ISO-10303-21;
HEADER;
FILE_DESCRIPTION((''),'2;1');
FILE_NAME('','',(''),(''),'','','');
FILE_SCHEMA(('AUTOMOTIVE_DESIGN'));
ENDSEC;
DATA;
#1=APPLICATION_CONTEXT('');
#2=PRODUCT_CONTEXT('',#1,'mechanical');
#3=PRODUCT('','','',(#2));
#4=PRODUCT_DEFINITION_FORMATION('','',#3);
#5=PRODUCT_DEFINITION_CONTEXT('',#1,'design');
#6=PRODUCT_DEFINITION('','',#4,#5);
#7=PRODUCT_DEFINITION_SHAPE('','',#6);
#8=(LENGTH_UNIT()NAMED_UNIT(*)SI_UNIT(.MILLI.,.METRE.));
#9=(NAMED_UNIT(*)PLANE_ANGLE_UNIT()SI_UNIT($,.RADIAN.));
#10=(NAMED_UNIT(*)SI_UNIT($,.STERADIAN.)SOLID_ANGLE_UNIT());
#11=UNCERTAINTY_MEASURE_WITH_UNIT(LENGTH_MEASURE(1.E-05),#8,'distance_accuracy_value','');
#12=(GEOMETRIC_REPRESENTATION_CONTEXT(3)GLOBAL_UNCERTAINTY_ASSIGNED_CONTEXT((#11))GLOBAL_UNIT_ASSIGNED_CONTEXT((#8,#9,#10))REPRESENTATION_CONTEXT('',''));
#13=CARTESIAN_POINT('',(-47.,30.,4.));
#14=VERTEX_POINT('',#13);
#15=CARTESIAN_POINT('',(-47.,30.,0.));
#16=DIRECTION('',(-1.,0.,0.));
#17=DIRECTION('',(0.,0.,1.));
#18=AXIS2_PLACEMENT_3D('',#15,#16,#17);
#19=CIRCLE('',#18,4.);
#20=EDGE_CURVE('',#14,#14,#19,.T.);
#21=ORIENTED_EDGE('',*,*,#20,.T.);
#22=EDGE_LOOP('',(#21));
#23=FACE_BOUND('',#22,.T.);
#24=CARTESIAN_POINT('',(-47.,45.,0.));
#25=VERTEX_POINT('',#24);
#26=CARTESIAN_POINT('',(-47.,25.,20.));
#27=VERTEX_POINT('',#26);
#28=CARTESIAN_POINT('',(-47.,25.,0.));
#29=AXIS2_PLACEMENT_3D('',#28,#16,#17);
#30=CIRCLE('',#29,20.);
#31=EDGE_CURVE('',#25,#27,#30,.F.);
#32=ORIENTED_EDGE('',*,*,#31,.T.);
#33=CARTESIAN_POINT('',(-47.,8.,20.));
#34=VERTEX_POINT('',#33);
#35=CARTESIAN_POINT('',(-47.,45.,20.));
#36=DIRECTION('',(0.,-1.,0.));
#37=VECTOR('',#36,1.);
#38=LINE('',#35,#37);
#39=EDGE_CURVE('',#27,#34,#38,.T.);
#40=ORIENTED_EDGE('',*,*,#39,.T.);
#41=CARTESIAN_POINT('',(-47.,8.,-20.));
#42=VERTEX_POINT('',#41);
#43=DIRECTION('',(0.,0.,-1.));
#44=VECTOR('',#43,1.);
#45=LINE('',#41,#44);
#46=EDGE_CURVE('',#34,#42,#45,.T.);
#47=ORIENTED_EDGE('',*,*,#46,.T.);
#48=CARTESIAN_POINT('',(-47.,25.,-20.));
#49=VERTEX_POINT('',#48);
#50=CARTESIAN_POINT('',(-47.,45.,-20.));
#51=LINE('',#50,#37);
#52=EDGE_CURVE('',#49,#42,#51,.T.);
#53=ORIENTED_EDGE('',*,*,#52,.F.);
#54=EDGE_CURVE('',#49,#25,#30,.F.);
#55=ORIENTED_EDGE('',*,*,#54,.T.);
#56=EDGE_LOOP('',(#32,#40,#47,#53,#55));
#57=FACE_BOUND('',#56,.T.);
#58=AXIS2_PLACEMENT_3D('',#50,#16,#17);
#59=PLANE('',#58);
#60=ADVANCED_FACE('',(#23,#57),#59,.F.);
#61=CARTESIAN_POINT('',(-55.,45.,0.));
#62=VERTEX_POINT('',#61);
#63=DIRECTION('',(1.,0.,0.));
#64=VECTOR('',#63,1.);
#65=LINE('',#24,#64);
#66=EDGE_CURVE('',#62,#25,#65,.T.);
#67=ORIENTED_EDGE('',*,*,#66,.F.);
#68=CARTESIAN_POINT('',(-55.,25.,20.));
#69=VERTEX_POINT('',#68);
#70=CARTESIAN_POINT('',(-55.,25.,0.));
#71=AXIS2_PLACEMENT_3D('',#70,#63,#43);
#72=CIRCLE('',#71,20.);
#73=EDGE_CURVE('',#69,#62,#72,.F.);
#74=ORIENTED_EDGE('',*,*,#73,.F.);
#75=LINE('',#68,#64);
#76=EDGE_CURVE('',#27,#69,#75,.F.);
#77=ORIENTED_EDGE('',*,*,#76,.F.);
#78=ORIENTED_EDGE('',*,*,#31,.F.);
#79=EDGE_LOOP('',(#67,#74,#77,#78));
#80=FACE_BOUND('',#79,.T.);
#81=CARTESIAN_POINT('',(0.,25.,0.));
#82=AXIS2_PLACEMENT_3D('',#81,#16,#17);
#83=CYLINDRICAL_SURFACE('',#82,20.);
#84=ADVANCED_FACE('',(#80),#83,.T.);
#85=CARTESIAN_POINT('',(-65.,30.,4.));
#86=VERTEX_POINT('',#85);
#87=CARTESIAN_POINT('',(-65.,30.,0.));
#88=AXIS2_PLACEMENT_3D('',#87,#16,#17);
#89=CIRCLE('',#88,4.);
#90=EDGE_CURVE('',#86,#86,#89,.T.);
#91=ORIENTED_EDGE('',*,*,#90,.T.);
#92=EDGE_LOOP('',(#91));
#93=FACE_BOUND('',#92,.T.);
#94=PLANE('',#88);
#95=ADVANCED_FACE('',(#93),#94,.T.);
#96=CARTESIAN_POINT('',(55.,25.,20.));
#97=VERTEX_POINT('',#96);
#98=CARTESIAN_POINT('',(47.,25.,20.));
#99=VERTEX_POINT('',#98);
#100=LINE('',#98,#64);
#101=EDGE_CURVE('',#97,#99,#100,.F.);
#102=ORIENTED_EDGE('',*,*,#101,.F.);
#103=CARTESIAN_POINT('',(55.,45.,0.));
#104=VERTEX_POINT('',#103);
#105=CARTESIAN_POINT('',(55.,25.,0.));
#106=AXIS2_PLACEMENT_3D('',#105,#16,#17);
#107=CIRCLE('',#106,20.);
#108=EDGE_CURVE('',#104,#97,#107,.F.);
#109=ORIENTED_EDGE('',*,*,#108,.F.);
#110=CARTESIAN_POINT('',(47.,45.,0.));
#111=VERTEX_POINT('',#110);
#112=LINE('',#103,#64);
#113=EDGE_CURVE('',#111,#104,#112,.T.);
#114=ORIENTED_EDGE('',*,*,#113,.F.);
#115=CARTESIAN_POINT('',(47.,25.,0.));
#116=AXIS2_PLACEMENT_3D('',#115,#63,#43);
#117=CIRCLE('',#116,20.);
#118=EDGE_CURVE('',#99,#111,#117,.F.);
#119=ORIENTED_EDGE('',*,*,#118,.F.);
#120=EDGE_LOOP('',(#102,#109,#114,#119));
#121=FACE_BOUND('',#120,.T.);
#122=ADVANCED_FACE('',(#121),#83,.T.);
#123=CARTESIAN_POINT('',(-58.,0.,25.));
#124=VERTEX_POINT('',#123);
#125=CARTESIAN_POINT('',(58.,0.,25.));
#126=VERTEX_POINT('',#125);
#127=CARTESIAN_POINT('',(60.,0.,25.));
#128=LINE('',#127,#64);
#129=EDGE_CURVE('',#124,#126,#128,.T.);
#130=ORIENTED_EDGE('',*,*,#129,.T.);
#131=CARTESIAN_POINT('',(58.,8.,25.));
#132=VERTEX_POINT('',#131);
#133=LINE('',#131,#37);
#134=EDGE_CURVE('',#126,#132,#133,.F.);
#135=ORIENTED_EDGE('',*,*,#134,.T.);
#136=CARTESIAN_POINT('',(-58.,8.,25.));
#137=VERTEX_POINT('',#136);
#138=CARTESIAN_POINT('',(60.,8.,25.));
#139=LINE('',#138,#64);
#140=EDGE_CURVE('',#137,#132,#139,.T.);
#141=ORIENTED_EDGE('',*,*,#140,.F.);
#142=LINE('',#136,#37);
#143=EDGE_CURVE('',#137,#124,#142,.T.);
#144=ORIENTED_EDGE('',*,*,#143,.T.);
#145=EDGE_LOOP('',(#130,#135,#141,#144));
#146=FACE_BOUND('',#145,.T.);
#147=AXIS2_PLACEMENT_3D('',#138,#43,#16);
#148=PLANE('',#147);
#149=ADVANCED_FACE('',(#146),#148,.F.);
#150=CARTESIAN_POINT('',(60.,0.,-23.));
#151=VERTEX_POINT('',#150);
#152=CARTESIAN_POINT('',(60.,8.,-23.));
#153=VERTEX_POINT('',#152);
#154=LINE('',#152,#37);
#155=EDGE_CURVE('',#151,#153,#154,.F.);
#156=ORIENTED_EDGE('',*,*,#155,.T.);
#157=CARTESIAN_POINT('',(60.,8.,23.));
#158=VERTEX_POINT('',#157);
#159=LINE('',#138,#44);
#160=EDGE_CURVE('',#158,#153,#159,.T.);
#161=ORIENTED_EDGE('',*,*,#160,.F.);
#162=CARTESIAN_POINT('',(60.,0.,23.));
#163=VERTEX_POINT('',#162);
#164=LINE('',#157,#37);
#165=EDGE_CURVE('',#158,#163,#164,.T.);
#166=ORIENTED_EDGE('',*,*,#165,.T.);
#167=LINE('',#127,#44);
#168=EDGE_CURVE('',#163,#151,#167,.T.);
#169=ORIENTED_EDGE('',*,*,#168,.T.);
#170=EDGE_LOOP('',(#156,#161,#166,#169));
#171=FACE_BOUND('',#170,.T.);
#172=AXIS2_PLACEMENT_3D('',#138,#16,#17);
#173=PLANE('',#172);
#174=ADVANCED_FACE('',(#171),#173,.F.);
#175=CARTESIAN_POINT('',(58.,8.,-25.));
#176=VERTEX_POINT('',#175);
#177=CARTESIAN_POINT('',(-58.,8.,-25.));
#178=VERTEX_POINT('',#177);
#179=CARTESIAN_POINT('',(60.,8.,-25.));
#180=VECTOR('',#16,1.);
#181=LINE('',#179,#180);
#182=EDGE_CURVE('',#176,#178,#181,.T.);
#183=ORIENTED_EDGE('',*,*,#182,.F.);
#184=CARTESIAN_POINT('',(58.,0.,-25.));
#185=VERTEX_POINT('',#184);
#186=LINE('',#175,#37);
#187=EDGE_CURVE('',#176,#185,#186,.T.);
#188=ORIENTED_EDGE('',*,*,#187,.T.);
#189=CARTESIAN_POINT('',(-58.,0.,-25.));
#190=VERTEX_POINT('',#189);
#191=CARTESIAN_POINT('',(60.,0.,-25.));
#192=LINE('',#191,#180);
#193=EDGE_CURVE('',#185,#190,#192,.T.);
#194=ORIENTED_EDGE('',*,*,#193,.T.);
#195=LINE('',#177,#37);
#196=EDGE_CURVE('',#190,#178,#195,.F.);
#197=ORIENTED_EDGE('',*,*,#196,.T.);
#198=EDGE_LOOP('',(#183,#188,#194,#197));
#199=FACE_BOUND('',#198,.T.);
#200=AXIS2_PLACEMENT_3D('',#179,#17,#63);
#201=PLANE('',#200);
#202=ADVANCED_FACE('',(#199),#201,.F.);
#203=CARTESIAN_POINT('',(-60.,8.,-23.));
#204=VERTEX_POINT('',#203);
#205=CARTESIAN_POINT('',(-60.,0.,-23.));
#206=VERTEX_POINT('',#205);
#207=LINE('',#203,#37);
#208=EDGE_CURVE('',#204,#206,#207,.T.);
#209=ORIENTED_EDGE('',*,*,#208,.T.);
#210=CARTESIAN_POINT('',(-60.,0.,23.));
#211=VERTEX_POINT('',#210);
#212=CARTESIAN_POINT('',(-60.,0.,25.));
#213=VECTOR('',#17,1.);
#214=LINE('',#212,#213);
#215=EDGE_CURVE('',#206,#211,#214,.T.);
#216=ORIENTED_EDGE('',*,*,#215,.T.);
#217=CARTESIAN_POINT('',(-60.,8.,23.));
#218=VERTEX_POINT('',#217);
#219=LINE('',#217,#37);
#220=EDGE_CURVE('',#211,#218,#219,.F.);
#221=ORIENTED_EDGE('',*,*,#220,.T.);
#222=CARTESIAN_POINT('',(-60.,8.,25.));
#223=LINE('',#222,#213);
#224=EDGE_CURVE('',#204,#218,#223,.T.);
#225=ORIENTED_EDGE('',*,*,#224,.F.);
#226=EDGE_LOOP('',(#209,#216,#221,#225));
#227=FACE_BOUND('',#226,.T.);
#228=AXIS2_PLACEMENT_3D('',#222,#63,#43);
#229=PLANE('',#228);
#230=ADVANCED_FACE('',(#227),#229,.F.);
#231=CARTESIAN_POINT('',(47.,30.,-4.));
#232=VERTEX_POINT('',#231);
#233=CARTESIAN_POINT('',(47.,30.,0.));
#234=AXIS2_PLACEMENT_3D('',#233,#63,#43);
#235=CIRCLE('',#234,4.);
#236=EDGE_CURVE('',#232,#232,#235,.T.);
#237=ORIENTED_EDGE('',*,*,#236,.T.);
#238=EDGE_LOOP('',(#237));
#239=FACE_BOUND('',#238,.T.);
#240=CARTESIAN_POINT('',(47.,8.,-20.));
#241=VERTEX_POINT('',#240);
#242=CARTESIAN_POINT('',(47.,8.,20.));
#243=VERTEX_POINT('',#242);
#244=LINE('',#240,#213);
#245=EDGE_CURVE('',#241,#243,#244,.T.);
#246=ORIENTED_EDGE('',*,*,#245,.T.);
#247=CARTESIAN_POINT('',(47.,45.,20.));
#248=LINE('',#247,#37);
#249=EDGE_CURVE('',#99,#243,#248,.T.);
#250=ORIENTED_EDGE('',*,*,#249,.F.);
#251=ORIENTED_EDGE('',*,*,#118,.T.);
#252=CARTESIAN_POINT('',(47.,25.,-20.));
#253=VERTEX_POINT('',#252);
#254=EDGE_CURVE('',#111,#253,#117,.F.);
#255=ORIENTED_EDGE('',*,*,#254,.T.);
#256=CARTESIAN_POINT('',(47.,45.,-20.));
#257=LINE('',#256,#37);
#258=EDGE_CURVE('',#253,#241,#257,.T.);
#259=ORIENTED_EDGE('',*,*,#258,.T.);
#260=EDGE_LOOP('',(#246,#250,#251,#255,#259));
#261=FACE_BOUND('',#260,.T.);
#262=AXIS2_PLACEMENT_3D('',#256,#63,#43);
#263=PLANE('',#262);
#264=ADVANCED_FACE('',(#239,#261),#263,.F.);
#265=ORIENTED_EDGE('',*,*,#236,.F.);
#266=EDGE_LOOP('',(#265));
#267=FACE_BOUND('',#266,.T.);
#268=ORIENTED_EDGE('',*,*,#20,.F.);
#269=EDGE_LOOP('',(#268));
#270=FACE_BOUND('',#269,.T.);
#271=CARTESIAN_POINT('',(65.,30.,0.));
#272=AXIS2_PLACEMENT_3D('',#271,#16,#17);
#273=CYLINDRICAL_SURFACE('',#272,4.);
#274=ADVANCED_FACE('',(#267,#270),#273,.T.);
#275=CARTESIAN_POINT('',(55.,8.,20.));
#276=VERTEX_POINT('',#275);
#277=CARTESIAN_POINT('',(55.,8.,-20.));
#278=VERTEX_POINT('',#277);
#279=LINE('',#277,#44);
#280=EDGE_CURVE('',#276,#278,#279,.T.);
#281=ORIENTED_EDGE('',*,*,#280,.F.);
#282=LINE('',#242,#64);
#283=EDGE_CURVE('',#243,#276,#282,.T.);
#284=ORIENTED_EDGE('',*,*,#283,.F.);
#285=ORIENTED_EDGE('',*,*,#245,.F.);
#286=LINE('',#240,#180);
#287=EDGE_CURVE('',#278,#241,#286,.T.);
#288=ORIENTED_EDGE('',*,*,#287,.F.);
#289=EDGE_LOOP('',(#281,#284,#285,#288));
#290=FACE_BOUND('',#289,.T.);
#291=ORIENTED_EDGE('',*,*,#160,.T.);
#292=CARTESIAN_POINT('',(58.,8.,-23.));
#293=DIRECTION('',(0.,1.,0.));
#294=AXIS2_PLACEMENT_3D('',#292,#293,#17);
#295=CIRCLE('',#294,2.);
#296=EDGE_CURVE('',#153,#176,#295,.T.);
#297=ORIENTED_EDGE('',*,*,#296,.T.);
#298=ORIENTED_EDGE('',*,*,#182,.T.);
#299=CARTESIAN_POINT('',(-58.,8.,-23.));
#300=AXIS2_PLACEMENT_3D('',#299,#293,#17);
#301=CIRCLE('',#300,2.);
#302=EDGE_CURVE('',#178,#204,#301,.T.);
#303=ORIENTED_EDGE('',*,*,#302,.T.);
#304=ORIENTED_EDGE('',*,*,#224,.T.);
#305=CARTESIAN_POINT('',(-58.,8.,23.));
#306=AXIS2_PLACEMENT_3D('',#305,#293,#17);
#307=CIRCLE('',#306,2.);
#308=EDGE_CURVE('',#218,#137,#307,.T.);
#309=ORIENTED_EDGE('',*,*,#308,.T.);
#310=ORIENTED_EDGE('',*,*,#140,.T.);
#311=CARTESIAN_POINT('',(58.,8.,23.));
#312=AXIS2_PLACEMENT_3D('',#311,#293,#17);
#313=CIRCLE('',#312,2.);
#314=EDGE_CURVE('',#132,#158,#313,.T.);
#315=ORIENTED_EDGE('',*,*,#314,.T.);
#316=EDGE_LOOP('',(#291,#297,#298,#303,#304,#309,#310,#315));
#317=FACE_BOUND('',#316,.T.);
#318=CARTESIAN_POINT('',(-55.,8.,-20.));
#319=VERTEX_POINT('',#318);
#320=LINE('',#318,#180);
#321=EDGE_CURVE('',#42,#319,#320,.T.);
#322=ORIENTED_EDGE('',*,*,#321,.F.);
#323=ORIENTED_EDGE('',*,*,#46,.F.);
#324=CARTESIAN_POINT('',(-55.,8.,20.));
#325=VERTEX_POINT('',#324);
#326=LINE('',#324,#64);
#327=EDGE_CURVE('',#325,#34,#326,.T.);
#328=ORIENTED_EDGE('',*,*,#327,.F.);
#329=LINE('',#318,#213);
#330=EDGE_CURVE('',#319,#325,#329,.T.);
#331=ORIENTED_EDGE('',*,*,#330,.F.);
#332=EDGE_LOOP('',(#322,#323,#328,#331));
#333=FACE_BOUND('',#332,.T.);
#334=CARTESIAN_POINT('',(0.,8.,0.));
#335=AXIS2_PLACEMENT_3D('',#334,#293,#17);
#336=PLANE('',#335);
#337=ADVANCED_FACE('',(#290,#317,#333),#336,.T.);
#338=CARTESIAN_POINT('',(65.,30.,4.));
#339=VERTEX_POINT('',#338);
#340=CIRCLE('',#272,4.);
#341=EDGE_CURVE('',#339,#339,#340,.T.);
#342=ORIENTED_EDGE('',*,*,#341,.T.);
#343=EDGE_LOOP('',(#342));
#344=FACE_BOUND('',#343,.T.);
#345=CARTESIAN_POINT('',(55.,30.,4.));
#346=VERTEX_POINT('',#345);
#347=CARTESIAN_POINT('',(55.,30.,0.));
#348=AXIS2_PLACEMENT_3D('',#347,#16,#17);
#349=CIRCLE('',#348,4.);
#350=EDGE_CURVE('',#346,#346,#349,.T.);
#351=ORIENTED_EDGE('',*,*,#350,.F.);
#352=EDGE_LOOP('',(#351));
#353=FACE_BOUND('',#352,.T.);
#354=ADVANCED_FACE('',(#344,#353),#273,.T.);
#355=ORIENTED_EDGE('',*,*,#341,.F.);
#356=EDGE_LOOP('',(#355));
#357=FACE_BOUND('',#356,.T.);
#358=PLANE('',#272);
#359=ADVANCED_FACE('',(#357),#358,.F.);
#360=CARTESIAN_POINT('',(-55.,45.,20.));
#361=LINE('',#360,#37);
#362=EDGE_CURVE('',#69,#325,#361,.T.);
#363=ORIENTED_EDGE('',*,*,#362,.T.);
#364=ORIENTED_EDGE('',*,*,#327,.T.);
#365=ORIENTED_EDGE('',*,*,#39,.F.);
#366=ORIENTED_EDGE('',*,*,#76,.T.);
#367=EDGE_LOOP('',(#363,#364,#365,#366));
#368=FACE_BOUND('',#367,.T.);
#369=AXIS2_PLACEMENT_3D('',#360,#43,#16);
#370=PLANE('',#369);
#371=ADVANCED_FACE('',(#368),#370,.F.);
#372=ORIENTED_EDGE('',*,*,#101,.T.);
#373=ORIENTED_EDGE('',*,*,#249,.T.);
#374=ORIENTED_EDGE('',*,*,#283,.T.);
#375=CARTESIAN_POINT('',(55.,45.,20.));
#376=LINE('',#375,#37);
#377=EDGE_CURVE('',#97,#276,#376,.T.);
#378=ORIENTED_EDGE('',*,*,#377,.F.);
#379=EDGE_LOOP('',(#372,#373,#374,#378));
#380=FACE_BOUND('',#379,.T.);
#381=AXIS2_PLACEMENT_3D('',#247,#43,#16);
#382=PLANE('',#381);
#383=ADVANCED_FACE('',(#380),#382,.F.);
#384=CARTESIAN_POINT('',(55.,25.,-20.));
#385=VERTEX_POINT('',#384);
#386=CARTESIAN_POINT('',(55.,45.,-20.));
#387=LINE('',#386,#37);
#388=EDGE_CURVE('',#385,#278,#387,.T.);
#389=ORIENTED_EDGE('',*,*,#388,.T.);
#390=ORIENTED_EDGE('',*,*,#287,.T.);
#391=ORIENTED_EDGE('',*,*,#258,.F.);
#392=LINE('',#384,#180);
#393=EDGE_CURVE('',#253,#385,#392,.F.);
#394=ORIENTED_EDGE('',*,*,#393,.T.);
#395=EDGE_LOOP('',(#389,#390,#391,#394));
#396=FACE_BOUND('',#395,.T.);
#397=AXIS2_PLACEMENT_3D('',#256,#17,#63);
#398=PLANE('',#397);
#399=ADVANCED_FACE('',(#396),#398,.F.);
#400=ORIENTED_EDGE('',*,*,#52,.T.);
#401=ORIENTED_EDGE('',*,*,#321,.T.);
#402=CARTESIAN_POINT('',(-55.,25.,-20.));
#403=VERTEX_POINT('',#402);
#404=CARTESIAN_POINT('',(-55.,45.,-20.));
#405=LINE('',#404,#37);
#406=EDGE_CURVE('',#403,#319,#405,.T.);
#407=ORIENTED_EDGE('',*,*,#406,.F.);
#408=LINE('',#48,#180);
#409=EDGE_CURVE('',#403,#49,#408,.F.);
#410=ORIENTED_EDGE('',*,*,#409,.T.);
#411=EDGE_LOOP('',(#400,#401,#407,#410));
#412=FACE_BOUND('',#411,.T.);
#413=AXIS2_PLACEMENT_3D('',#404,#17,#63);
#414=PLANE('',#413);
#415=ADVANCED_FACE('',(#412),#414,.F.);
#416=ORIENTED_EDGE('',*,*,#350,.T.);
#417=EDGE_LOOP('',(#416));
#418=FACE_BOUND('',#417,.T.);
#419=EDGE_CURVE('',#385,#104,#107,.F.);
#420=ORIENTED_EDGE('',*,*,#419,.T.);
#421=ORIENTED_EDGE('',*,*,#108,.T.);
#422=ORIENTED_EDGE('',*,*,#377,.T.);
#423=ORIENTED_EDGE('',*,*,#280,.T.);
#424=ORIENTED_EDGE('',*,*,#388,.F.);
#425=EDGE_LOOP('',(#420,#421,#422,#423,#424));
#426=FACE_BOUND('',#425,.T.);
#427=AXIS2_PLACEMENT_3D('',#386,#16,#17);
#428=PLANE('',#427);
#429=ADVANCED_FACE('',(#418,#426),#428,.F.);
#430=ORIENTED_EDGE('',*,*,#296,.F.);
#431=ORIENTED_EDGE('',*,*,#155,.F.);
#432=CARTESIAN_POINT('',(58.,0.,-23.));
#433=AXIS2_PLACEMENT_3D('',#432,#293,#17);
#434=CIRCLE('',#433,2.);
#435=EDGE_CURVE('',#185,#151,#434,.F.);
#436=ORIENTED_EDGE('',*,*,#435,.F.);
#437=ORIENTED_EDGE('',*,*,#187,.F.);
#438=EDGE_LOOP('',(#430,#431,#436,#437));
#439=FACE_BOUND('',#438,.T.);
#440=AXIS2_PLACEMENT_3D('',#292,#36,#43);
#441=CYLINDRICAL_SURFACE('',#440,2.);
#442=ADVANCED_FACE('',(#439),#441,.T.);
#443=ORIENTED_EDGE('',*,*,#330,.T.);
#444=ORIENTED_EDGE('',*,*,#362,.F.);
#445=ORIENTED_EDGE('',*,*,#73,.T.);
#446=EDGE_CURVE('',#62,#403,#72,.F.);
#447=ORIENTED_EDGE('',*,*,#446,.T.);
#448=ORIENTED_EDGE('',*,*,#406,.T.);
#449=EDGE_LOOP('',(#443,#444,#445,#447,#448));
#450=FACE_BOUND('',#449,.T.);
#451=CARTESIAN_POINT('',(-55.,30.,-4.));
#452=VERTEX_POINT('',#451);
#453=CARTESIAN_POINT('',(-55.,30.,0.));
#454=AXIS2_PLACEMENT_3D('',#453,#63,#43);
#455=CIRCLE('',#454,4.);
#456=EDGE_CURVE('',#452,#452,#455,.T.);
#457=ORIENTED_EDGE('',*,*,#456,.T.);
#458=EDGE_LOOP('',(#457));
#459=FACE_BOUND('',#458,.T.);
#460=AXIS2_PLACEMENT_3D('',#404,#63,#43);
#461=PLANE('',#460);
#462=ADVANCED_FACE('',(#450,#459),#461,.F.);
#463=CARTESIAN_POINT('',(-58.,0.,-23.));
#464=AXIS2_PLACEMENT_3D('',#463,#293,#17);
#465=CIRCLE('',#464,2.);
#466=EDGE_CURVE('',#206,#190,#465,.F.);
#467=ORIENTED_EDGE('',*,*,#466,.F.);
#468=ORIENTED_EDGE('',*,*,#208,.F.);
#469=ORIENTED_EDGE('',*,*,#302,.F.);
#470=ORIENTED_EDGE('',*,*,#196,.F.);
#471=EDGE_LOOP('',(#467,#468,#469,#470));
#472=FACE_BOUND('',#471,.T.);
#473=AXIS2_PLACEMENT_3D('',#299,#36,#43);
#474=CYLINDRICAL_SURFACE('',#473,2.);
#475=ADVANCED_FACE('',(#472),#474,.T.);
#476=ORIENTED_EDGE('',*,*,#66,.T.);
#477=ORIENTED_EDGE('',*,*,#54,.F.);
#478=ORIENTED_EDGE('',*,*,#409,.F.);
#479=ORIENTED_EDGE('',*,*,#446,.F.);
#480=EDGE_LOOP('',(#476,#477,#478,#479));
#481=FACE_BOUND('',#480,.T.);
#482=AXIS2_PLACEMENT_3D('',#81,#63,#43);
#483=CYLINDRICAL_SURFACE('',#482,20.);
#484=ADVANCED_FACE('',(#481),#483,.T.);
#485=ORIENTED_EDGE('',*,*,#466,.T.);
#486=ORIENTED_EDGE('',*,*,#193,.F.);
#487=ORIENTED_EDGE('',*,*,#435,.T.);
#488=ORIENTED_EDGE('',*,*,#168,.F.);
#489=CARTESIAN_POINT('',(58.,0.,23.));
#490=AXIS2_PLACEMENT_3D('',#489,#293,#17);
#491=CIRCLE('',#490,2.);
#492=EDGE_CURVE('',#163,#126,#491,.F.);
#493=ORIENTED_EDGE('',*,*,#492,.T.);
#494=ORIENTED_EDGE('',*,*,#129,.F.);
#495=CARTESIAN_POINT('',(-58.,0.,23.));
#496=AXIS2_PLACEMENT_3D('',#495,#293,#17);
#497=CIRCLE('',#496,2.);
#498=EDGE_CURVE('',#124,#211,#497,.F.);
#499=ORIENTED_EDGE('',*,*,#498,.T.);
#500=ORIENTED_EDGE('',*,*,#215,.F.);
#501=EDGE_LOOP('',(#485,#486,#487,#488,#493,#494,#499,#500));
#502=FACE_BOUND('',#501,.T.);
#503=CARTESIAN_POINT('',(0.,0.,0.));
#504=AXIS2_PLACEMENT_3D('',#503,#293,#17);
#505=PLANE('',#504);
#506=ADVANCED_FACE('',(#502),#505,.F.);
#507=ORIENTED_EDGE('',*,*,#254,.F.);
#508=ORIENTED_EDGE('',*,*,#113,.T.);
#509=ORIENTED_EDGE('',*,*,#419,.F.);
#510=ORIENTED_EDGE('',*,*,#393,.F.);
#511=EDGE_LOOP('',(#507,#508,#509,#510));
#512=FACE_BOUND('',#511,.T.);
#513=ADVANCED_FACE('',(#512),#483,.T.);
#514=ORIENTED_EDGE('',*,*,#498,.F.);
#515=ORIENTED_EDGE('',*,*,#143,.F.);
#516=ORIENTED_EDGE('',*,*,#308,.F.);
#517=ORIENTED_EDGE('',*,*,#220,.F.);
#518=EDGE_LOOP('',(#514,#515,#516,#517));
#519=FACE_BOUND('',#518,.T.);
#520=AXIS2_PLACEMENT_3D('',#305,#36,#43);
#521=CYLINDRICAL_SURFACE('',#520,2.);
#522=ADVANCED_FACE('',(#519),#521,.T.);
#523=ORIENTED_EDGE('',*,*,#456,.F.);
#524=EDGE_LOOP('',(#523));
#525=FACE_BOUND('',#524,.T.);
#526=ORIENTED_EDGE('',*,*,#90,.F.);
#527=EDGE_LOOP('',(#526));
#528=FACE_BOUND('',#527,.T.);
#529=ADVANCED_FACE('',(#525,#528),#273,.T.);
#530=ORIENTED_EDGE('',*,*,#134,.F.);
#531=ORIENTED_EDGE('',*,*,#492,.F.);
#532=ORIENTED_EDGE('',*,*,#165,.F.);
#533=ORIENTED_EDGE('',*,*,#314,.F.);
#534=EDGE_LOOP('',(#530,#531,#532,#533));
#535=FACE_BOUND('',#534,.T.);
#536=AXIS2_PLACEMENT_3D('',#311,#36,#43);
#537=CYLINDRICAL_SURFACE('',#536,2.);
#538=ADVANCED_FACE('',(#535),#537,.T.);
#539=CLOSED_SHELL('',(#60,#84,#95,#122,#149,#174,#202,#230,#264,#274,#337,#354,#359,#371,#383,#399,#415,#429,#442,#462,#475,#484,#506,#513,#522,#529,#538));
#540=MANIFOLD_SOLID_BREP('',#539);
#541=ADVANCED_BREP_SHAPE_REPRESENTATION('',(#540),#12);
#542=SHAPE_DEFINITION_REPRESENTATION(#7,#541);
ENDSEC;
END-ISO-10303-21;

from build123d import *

# Parameters (mm, degrees)
SKETCH1_W                = 120
SKETCH1_H                = 50
BOSS_EXTRUDE1_DEPTH      = 8
SKETCH2_W                = 8
SKETCH2_H                = 40
BOSS_EXTRUDE2_DEPTH      = 37
FILLET1_R                = 20
BOSS_EXTRUDE3_DEPTH      = 10
BOSS_EXTRUDE3_DEPTH_BACK = 120
SKETCH3_R                = 4
FILLET2_R                = 2


with BuildPart() as part:
    # Sketch1 → Boss-Extrude1 (new body)
    with BuildSketch(Plane(origin=(0, 0, 0), x_dir=(1, 0, 0), z_dir=(0, 1, 0))):
        Rectangle(SKETCH1_W, SKETCH1_H)
    extrude(amount=BOSS_EXTRUDE1_DEPTH)

    # Sketch2 → Boss-Extrude2 (add)
    with BuildSketch(Plane(origin=(0, 8, 0), x_dir=(1, 0, 0), z_dir=(0, 1, 0))):
        with Locations((-51, 0)):
            Rectangle(SKETCH2_W, SKETCH2_H)
        with Locations((51, 0)):
            Rectangle(SKETCH2_W, SKETCH2_H)
    extrude(amount=BOSS_EXTRUDE2_DEPTH)

    # Fillet1
    fillet1_edges = [part.edges().sort_by_distance(p)[0] for p in [
        (51, 45, -20),
        (51, 45, 20),
        (-51, 45, -20),
        (-51, 45, 20),
    ]]
    fillet(fillet1_edges, radius=FILLET1_R - 0.0001)  # a hair under: the kernel refuses the full size

    # Sketch3 → Boss-Extrude3 (add, two sides: drawn at the far end of the back side and taken through both)
    with BuildSketch(Plane.ZY.offset(55).offset(-BOSS_EXTRUDE3_DEPTH_BACK)):
        with Locations((0, 30)):
            Circle(SKETCH3_R)
    extrude(amount=BOSS_EXTRUDE3_DEPTH + BOSS_EXTRUDE3_DEPTH_BACK)

    # Fillet2
    fillet2_edges = [part.edges().sort_by_distance(p)[0] for p in [
        (-60, 4, -25),
        (60, 4, -25),
        (60, 4, 25),
        (-60, 4, 25),
    ]]
    fillet(fillet2_edges, radius=FILLET2_R)


solid = part.part
